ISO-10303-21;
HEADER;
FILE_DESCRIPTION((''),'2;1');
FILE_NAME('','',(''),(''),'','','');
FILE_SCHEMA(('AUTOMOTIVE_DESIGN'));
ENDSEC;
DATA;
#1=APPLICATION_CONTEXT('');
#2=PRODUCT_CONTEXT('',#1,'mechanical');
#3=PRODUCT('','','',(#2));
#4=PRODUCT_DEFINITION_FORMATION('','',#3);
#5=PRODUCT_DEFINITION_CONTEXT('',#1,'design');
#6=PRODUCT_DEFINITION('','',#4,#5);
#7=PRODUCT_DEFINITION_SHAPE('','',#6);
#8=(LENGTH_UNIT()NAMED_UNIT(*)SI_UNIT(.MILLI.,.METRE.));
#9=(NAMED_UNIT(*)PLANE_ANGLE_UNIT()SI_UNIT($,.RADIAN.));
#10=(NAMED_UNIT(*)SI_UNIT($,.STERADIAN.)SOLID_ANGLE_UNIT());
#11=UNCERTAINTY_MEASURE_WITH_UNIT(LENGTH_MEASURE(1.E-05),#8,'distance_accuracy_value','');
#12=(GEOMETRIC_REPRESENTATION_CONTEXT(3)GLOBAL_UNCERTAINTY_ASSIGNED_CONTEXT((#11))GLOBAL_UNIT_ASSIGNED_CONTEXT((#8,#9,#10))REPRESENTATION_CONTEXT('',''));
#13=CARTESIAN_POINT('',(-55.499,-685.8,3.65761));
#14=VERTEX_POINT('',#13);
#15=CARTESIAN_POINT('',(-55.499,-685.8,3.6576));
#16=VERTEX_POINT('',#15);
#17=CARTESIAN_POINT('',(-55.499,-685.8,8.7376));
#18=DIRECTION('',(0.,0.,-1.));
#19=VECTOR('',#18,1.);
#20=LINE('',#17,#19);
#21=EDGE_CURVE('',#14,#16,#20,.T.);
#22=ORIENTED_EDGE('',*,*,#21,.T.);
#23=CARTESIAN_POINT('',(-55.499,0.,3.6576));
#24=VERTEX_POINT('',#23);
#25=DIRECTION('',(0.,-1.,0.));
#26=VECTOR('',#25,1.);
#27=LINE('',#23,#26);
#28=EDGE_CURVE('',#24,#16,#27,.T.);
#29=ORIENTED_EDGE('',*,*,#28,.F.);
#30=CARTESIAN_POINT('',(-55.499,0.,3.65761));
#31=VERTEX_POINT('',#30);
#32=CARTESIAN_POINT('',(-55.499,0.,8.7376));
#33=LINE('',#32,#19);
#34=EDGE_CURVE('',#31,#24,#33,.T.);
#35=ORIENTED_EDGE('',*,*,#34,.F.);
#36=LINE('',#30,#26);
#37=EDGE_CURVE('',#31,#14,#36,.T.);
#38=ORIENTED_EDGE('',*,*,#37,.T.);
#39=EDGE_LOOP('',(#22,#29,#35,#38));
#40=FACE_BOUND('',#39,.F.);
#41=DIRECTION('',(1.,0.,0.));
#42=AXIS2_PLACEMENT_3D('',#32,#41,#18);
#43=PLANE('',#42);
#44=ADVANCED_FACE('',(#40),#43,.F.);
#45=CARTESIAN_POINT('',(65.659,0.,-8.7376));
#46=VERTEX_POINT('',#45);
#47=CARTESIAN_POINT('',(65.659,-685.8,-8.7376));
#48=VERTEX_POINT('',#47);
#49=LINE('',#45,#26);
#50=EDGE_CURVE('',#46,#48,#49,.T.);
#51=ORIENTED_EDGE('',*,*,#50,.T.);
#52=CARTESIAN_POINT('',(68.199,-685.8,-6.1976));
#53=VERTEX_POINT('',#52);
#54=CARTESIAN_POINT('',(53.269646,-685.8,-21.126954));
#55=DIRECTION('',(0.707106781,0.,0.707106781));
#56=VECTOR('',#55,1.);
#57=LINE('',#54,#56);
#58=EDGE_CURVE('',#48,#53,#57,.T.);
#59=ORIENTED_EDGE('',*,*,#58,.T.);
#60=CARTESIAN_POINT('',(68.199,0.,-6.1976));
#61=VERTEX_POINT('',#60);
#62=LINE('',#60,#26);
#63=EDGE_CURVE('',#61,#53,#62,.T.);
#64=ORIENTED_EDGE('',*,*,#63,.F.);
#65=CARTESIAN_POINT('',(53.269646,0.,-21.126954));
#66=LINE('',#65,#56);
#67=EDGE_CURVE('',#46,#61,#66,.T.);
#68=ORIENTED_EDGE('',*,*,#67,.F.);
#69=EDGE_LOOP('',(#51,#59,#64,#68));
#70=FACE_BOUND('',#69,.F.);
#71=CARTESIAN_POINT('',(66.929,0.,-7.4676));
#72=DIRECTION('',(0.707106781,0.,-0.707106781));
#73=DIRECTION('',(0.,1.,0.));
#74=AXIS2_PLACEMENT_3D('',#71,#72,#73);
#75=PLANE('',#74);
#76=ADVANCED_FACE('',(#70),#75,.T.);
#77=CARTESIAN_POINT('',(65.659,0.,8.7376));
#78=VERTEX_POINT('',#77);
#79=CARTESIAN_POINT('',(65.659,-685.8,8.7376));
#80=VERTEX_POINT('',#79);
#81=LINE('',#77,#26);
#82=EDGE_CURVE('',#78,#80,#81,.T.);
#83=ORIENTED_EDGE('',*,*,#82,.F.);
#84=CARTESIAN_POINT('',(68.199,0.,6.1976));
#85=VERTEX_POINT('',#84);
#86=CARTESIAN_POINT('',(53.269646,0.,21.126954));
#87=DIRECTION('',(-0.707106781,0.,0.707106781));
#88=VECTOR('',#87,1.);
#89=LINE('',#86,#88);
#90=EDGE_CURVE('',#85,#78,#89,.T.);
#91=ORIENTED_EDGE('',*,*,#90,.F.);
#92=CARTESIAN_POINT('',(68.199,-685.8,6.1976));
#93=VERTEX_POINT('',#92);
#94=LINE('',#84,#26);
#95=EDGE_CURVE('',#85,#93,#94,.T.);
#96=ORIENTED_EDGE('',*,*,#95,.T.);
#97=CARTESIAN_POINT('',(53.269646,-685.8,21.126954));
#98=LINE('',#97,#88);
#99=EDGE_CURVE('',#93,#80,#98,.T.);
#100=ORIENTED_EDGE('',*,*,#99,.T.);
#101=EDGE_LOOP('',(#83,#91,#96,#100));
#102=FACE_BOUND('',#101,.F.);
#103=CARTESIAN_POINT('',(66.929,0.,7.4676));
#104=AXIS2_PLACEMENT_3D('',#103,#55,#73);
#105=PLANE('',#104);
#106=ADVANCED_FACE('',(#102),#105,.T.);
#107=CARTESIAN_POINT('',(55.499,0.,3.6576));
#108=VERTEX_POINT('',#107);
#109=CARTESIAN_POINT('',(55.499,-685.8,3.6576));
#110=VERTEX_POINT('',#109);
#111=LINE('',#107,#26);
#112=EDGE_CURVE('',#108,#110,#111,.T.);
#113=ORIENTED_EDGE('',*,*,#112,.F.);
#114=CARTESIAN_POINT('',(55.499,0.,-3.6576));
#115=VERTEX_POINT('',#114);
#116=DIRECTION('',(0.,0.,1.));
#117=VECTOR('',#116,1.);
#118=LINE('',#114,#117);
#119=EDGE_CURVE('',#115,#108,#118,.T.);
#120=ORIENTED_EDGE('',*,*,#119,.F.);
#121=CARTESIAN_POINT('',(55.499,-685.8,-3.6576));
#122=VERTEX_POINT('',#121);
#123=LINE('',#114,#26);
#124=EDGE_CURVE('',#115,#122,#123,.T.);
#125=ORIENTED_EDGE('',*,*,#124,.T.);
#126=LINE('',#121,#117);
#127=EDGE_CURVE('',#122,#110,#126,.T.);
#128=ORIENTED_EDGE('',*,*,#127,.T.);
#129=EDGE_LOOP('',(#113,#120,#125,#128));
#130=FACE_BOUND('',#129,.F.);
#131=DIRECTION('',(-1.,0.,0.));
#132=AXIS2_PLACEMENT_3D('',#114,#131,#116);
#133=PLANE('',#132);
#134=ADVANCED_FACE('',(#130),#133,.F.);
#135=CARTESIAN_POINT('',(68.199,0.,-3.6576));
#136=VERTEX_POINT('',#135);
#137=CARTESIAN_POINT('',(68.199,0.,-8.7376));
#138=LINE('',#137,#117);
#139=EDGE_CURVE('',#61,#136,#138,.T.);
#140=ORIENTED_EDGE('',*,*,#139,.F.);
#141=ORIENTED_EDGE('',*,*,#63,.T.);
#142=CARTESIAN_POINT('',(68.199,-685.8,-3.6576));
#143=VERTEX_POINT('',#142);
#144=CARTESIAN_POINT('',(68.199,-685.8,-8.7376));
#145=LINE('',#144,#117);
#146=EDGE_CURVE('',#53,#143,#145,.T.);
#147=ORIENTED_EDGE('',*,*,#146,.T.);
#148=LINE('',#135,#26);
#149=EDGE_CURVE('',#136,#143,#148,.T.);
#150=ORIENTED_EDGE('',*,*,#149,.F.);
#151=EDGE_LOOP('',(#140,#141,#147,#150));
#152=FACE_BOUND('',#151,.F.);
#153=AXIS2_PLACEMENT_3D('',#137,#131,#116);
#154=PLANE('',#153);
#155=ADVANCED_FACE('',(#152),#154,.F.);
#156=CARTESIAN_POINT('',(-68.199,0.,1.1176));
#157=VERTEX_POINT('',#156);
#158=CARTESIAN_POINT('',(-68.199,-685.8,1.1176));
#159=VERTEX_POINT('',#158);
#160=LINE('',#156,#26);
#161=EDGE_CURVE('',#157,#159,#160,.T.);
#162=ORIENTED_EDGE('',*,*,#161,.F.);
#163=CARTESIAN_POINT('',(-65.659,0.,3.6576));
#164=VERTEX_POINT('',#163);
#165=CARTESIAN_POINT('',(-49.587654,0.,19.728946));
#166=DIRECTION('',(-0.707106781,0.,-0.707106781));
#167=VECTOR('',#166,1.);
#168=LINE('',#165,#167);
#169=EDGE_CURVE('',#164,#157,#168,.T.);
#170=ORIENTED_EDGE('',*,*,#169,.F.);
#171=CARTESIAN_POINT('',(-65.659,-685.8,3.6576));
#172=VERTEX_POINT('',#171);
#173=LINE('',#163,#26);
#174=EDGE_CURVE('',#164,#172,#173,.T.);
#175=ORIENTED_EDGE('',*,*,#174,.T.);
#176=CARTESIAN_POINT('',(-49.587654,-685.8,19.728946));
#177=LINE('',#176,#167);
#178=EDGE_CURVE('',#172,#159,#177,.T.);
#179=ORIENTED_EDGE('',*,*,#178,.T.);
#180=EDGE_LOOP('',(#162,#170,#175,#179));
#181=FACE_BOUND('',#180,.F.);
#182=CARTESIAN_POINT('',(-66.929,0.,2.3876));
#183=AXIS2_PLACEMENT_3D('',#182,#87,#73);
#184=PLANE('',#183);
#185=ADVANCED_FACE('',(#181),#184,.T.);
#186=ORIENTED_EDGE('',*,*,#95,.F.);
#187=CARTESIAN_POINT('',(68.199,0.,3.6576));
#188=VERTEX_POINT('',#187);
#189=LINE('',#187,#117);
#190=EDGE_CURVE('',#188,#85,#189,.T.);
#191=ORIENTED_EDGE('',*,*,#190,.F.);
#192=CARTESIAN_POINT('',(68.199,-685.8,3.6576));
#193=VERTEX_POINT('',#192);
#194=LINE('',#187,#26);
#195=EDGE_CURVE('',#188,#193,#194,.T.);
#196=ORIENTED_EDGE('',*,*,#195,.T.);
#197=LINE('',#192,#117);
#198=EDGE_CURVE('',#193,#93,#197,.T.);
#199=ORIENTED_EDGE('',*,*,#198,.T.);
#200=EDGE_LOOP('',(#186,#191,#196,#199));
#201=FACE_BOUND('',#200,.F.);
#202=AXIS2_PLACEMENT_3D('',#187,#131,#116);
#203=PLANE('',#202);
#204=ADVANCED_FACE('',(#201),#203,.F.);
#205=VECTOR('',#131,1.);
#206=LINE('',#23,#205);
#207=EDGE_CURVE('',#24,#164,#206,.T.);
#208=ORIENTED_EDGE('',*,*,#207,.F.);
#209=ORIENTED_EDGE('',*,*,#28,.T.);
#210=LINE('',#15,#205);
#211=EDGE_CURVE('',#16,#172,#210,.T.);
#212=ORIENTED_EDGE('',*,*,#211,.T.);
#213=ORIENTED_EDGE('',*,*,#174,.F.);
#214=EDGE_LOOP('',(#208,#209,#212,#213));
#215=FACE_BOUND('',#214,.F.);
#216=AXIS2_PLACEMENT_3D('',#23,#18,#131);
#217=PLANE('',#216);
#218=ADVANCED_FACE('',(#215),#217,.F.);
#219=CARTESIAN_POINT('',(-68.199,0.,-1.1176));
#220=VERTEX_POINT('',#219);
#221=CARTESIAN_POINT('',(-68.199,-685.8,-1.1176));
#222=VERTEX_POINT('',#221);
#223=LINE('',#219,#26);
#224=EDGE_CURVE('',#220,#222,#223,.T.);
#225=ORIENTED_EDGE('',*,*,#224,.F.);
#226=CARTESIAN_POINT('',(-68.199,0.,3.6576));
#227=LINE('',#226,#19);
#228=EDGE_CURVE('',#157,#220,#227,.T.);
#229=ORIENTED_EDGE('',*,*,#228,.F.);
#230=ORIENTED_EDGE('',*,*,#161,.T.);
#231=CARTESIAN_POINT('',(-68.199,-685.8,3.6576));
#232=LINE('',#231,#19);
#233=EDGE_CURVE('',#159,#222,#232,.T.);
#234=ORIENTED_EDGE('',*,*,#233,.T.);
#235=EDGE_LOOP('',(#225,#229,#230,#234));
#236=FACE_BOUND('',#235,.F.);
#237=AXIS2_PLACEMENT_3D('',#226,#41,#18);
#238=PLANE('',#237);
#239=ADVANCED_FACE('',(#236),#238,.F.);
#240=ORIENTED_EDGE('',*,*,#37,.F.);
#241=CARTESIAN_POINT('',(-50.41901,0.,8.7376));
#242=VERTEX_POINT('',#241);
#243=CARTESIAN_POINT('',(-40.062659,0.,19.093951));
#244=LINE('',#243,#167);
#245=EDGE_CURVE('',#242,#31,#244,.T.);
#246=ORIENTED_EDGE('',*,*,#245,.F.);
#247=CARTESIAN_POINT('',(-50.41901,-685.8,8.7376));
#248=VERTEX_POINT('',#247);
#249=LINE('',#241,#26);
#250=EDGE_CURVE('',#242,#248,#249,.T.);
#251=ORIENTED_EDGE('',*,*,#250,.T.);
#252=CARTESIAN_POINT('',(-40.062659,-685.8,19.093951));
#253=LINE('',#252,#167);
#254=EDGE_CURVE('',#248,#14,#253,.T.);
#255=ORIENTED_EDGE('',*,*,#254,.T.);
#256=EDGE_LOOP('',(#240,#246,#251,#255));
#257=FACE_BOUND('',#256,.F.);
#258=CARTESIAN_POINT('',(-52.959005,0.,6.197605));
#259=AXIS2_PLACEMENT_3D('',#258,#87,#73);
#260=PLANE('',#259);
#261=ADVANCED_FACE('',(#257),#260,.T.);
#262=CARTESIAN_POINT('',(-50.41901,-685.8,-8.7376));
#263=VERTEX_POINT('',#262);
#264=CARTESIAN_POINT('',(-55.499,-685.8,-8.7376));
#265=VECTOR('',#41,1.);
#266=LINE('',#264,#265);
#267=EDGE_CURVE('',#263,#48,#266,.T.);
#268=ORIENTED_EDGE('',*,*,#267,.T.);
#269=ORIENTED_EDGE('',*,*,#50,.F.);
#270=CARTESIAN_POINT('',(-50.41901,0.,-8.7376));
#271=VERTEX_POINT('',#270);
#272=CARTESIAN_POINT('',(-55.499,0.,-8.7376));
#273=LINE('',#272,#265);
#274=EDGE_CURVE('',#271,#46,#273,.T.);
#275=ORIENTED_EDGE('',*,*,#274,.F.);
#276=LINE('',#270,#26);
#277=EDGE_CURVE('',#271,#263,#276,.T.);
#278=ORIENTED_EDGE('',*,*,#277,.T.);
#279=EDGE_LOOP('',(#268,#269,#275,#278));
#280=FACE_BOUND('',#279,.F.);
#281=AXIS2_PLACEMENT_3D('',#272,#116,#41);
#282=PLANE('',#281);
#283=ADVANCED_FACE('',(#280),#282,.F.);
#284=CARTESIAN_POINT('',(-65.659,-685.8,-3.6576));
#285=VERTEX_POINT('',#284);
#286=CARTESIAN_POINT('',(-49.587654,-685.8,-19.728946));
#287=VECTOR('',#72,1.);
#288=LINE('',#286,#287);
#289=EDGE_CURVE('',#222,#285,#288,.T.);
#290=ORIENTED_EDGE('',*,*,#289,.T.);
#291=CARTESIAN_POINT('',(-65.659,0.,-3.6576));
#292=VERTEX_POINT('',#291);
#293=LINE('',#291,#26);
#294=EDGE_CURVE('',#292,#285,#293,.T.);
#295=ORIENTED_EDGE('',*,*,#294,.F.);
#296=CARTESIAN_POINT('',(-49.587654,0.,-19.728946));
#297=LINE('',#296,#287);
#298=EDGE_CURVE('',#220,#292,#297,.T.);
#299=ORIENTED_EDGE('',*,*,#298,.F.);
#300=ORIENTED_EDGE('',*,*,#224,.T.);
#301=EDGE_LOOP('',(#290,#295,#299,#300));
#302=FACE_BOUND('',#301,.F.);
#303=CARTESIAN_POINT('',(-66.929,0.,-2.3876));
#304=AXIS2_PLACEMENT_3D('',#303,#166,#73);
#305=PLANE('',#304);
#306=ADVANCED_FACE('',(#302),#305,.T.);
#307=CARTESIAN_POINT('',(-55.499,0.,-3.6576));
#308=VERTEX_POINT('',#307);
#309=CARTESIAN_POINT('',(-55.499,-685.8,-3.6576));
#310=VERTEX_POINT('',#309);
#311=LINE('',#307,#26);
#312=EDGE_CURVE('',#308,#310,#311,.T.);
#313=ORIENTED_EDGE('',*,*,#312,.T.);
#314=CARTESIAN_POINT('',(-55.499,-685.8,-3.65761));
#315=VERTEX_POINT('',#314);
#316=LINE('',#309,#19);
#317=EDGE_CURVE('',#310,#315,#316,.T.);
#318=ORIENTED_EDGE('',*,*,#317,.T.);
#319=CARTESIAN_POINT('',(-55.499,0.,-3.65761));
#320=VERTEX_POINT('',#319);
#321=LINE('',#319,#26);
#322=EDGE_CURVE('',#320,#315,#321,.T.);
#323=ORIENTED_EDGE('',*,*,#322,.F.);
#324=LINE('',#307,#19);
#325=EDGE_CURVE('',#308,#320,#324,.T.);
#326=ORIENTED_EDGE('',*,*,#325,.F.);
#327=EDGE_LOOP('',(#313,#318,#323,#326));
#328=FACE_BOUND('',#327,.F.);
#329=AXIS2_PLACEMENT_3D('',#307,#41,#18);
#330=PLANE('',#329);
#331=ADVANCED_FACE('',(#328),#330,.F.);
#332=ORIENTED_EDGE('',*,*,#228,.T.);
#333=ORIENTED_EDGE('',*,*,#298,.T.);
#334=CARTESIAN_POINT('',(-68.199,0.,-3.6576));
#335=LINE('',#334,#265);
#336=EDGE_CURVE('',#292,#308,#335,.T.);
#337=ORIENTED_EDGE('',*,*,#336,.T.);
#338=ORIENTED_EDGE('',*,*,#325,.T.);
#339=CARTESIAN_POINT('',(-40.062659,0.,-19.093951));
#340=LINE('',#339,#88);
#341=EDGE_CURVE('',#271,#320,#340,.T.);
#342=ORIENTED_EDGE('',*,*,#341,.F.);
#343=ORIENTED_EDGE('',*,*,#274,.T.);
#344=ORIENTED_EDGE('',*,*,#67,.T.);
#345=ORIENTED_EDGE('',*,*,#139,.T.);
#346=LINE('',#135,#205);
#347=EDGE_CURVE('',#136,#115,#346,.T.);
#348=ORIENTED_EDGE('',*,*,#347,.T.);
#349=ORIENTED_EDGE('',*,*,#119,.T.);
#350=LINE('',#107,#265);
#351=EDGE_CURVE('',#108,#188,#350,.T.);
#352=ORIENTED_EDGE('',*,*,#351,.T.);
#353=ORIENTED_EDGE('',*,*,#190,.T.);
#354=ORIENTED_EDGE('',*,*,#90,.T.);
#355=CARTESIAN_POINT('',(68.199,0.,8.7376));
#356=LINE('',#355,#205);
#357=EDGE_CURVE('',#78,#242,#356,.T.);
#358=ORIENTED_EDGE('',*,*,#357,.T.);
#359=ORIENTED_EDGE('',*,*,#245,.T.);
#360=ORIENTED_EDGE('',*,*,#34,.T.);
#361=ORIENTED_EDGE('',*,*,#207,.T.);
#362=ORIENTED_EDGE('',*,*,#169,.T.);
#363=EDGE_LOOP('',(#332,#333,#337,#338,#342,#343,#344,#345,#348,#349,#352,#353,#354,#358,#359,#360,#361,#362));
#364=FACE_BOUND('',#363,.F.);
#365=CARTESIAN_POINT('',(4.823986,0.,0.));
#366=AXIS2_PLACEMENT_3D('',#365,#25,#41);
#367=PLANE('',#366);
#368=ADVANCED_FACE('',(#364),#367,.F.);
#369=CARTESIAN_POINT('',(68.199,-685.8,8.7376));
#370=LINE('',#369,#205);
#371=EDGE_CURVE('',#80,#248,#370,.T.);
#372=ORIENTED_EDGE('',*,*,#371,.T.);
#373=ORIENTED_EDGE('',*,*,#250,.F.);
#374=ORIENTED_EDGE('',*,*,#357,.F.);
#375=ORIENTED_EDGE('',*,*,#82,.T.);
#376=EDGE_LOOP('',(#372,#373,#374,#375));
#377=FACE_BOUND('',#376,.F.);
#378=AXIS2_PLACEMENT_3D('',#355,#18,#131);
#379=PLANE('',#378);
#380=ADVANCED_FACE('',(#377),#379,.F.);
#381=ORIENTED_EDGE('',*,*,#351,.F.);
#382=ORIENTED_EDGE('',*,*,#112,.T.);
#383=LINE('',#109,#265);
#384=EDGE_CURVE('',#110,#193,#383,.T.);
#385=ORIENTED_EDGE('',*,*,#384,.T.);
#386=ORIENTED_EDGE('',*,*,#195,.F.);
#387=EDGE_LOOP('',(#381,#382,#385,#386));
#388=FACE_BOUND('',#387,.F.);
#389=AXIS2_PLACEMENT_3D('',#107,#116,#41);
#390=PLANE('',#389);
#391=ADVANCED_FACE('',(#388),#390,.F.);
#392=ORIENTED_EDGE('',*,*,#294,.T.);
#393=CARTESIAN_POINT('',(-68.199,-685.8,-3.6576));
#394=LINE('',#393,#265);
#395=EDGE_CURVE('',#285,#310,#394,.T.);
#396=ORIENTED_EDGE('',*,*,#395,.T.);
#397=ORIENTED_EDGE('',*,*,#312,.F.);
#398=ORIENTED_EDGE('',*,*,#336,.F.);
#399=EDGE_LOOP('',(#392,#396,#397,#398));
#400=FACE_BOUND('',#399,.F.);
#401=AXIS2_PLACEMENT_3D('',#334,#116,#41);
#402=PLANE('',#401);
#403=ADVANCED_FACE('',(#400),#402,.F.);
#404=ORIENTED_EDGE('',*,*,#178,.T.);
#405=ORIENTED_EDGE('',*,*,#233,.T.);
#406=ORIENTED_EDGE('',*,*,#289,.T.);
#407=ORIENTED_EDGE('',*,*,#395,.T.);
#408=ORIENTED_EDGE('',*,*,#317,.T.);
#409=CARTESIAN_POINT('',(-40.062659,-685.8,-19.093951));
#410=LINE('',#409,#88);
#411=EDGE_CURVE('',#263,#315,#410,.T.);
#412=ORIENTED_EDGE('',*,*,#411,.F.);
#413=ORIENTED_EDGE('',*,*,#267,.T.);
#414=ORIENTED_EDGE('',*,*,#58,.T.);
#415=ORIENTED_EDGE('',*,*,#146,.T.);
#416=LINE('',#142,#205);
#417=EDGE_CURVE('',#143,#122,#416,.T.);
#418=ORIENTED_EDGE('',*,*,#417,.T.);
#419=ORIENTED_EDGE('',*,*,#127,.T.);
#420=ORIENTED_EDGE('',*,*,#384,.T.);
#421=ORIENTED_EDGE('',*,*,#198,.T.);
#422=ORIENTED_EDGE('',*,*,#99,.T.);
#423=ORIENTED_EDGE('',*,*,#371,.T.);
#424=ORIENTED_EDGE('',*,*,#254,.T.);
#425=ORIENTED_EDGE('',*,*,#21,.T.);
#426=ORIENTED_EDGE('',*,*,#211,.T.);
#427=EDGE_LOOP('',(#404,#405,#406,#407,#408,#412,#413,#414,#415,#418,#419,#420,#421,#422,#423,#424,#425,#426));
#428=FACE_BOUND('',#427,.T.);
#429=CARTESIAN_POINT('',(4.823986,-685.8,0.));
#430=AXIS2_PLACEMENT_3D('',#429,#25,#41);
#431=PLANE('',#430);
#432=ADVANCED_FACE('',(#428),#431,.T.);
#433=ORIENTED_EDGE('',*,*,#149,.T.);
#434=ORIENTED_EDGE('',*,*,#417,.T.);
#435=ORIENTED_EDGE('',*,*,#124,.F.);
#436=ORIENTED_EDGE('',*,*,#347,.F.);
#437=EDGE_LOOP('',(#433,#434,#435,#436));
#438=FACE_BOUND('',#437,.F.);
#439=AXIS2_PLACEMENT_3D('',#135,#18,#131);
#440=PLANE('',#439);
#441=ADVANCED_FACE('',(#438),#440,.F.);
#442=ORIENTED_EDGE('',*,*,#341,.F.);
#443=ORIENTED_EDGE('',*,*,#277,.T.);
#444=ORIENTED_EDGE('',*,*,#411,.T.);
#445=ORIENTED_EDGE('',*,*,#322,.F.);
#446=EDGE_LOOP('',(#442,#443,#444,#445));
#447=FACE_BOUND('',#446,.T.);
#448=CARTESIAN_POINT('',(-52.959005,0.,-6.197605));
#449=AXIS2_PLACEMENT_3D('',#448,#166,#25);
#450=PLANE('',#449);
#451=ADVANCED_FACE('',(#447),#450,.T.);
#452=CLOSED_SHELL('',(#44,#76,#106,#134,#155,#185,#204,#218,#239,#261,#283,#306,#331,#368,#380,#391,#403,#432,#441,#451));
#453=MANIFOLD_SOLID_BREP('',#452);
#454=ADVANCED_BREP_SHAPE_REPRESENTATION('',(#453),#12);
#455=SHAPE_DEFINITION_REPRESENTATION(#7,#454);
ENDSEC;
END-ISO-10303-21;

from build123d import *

# Parameters (mm, degrees)
F1_DEPTH = 685.8
F2_SIZE  = 2.54
F3_SIZE  = 5.07999


# Not quite as in the source:
# - a fillet or chamfer is up to 0.001 mm smaller than in the source, because OpenCascade refuses the exact size


with BuildPart() as f1:
    # F0 (on Front) → F1 (new body)
    with BuildSketch(Plane.XZ):
        Polygon((68.199, 3.6576), (68.199, 8.7376), (-55.499, 8.7376), (-55.499, 3.6576), (-68.199, 3.6576), (-68.199, -3.6576), (-55.499, -3.6576), (-55.499, -8.7376), (68.199, -8.7376), (68.199, -3.6576), (55.499, -3.6576), (55.499, 3.6576), align=None)
    extrude(amount=F1_DEPTH)

    # F2
    f2_edges = [f1.edges().sort_by_distance(p)[0] for p in [
        (68.199, -342.9, 8.7376),
        (68.199, -342.9, -8.7376),
        (-68.199, -342.9, 3.6576),
        (-68.199, -342.9, -3.6576),
    ]]
    chamfer(f2_edges, length=F2_SIZE)

    # F3 (size 5.08 in the source; OpenCascade refuses exactly that, so slightly less here)
    f3_edges = [f1.edges().sort_by_distance(p)[0] for p in [
        (-55.499, -342.9, 8.7376),
        (-55.499, -342.9, -8.7376),
    ]]
    chamfer(f3_edges, length=F3_SIZE)


solid = f1.part
